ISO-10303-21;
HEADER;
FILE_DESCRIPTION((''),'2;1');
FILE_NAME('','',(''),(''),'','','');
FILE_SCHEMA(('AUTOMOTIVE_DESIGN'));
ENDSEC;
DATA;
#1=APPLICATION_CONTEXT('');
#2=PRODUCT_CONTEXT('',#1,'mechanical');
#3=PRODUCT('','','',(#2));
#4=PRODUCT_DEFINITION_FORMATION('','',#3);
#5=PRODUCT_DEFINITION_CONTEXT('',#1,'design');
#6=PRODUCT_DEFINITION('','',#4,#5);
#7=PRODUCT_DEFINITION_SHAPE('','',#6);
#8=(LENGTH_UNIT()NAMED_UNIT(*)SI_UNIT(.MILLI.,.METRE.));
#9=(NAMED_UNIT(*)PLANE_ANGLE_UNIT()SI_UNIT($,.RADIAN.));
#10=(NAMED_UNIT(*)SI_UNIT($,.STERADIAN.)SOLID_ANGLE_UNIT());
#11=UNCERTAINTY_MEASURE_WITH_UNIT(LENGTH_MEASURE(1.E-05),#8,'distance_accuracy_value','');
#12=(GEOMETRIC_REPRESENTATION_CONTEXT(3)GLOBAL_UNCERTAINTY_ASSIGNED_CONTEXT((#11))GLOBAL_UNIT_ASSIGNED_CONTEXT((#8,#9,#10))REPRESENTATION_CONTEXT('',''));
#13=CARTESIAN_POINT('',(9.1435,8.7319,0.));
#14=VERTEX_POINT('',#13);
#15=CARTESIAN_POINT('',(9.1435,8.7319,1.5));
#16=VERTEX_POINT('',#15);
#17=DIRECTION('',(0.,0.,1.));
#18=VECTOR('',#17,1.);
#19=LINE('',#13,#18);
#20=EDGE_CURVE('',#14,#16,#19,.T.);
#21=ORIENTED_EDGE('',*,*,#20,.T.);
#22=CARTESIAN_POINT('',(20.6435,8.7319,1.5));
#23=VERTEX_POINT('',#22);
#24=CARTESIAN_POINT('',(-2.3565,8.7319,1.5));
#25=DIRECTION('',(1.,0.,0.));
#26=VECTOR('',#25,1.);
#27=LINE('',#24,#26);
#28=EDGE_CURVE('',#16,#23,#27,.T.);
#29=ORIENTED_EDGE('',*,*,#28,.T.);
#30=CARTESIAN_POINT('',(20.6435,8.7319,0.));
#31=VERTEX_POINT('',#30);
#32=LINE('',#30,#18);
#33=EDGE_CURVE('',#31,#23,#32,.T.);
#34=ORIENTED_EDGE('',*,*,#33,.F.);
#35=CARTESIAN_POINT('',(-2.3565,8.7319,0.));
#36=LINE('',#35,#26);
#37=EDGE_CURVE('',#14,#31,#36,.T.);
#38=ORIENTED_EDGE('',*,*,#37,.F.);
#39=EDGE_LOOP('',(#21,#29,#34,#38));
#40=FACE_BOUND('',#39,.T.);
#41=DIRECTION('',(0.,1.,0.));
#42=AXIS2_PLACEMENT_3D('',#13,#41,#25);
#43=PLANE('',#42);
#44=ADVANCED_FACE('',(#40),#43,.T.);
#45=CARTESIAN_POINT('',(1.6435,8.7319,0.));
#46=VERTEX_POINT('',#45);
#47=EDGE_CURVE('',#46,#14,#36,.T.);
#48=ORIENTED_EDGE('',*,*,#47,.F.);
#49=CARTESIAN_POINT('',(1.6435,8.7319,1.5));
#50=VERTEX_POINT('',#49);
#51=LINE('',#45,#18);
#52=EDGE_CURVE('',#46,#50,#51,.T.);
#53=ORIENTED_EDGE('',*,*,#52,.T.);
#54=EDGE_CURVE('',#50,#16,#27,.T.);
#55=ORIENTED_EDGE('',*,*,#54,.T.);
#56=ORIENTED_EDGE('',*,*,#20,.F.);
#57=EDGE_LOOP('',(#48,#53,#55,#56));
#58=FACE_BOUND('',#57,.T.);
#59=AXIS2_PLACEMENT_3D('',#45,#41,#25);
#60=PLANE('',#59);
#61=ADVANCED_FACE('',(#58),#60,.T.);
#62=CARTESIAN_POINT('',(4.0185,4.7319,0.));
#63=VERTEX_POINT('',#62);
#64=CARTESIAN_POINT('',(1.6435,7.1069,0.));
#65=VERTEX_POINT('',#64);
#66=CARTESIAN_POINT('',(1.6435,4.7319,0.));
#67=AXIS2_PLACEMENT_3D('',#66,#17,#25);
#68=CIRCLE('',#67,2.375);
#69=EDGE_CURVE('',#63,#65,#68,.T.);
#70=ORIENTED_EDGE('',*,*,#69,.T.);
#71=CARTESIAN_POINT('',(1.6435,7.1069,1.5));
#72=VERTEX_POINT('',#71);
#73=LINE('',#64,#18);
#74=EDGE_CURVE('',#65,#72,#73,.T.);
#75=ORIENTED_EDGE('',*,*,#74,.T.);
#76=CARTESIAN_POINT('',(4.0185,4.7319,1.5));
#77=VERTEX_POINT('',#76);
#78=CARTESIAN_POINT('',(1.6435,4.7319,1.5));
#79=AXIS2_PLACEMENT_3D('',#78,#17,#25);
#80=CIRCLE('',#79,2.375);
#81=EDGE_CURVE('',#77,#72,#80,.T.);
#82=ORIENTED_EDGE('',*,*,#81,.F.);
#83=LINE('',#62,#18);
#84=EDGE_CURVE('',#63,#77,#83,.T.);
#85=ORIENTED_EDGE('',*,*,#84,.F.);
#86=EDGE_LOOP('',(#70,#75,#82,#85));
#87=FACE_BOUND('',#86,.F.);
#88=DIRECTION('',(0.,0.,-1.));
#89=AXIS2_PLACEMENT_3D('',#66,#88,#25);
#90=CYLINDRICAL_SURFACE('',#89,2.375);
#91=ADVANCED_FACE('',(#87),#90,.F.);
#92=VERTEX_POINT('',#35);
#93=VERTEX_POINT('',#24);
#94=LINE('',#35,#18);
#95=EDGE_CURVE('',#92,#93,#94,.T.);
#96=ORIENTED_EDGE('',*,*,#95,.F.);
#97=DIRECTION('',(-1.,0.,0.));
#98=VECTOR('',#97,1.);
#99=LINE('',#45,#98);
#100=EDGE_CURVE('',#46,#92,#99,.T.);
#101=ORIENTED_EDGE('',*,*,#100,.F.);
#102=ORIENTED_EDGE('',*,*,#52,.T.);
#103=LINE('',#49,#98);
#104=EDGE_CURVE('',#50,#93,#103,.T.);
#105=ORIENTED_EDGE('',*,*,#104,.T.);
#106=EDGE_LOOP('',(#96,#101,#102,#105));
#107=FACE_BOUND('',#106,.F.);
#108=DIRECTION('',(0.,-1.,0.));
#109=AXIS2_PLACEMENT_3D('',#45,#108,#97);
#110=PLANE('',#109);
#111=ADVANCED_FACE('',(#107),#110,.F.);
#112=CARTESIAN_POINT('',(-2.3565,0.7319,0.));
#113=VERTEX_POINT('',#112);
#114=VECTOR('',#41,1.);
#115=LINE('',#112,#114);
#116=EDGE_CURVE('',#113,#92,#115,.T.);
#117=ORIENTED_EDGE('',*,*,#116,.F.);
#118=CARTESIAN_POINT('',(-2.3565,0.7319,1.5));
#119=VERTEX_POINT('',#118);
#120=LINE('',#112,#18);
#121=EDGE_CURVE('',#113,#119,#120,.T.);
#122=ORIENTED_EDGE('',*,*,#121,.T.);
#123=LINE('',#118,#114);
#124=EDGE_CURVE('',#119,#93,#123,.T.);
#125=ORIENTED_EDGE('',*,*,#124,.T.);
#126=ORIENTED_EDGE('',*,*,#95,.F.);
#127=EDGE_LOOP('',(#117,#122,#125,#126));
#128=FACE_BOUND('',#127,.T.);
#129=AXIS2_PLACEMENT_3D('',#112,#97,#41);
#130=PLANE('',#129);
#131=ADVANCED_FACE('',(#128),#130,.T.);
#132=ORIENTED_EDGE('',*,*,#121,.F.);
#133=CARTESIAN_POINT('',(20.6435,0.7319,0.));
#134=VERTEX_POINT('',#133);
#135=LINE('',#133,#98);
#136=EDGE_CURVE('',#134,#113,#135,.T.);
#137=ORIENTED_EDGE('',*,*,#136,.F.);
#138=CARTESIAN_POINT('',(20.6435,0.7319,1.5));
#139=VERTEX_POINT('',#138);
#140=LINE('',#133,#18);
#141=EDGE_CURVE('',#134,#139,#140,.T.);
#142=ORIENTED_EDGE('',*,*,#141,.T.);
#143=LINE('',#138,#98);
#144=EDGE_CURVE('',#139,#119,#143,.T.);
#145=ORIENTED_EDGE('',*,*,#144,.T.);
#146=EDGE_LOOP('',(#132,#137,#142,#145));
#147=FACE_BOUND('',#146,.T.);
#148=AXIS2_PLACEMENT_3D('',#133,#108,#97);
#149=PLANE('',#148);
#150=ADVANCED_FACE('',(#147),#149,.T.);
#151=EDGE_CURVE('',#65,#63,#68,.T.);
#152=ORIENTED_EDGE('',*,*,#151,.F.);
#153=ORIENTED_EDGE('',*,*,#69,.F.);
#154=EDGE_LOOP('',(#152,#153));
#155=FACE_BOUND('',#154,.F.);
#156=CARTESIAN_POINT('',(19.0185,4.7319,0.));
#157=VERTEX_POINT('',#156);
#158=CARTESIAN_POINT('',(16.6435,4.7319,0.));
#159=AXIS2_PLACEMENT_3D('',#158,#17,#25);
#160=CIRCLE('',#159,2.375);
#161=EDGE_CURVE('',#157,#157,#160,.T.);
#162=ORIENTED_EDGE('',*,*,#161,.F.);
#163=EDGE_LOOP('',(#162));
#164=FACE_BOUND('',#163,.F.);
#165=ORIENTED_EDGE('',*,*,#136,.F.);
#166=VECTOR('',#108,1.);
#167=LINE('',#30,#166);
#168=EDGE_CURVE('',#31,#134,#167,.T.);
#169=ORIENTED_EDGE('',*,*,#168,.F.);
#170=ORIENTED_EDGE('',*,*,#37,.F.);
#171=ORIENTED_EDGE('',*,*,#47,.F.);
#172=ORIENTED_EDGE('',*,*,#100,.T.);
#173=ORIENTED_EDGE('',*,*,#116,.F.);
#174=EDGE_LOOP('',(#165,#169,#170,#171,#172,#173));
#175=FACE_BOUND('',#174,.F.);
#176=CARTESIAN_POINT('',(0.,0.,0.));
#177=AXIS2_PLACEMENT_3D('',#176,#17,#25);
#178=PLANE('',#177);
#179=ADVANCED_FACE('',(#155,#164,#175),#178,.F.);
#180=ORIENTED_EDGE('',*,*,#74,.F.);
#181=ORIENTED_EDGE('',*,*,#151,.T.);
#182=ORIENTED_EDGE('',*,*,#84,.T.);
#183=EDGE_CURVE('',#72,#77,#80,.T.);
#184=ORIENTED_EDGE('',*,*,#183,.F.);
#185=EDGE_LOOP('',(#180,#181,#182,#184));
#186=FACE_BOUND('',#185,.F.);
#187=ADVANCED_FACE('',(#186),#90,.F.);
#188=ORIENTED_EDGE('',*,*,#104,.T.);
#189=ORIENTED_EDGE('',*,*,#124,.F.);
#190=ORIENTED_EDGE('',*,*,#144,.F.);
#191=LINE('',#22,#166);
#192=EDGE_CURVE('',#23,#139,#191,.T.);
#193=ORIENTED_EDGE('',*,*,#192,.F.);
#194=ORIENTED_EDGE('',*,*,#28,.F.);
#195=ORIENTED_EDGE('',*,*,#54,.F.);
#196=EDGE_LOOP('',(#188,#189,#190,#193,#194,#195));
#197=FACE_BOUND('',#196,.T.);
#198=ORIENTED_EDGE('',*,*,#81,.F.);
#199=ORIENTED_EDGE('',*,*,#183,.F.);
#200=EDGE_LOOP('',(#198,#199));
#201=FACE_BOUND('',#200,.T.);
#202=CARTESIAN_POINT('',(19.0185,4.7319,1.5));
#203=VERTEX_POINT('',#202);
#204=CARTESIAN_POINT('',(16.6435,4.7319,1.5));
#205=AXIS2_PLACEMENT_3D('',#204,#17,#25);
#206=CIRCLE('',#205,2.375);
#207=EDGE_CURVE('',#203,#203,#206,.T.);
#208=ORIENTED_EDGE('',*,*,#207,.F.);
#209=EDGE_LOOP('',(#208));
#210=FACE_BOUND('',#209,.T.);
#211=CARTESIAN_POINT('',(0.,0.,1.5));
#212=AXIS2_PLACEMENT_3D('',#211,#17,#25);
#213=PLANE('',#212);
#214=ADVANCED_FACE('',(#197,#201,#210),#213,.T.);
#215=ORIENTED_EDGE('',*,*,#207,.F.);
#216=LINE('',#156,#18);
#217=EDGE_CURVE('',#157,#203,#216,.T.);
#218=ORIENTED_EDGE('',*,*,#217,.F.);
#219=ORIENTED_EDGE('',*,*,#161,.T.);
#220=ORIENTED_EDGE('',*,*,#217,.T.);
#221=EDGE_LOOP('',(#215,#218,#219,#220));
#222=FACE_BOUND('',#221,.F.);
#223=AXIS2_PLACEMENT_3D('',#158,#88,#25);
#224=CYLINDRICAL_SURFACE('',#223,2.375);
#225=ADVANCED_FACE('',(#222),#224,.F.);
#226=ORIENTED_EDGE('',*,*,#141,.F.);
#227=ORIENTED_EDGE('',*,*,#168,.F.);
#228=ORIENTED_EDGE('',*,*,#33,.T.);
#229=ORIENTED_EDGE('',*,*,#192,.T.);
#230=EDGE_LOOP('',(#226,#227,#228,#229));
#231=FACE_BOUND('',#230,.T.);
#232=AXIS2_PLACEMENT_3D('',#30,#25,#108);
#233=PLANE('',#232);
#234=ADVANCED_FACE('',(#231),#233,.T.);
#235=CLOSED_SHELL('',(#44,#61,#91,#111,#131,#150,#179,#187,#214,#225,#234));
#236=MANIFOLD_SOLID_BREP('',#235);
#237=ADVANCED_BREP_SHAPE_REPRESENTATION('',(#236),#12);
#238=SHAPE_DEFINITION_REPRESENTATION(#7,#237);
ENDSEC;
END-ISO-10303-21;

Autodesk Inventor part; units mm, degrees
ref_plane "YZ Plane" through (0, 0, 0) normal (1, 0, 0) x (0, 1, 0)
ref_plane "XZ Plane" through (0, 0, 0) normal (0, 1, 0) x (-1, 0, 0)
ref_plane "XY Plane" through (0, 0, 0) normal (0, 0, 1) x (1, 0, 0)
sketch "Sketch2" plane through (0, 0, 0) normal (0, 0, 1) x (1, 0, 0)
  circle A0 centre (1.6435, 4.7319) radius 2.125 projected
  circle A1 centre (1.6435, 4.7319) radius 2.375
  line L0 (1.6435, 4.7319) -> (1.6435, 8.7319)
  line L1 (1.6435, 8.7319) -> (-2.3565, 8.7319)
  line L2 (-2.3565, 8.7319) -> (20.6435, 8.7319)
  line L3 (20.6435, 8.7319) -> (20.6435, 0.7319)
  line L4 (20.6435, 0.7319) -> (-2.3565, 0.7319)
  line L5 (-2.3565, 0.7319) -> (-2.3565, 8.7319)
  line L6 (9.1435, 8.7319) -> (9.1435, 2)
  circle A2 centre (16.6435, 4.7319) radius 2.375
  point P0 (0, 0)
  dimension "d0" = 4.75
  dimension "d1" = 4
  dimension "d2" = 4
  dimension "d3" = 23
  dimension "d4" = 8
extrude "Extrusion1" add sketch "Sketch2" along normal blind 1.5 contours L2 L3 L4 L5 L1
properties part number "Connector"
